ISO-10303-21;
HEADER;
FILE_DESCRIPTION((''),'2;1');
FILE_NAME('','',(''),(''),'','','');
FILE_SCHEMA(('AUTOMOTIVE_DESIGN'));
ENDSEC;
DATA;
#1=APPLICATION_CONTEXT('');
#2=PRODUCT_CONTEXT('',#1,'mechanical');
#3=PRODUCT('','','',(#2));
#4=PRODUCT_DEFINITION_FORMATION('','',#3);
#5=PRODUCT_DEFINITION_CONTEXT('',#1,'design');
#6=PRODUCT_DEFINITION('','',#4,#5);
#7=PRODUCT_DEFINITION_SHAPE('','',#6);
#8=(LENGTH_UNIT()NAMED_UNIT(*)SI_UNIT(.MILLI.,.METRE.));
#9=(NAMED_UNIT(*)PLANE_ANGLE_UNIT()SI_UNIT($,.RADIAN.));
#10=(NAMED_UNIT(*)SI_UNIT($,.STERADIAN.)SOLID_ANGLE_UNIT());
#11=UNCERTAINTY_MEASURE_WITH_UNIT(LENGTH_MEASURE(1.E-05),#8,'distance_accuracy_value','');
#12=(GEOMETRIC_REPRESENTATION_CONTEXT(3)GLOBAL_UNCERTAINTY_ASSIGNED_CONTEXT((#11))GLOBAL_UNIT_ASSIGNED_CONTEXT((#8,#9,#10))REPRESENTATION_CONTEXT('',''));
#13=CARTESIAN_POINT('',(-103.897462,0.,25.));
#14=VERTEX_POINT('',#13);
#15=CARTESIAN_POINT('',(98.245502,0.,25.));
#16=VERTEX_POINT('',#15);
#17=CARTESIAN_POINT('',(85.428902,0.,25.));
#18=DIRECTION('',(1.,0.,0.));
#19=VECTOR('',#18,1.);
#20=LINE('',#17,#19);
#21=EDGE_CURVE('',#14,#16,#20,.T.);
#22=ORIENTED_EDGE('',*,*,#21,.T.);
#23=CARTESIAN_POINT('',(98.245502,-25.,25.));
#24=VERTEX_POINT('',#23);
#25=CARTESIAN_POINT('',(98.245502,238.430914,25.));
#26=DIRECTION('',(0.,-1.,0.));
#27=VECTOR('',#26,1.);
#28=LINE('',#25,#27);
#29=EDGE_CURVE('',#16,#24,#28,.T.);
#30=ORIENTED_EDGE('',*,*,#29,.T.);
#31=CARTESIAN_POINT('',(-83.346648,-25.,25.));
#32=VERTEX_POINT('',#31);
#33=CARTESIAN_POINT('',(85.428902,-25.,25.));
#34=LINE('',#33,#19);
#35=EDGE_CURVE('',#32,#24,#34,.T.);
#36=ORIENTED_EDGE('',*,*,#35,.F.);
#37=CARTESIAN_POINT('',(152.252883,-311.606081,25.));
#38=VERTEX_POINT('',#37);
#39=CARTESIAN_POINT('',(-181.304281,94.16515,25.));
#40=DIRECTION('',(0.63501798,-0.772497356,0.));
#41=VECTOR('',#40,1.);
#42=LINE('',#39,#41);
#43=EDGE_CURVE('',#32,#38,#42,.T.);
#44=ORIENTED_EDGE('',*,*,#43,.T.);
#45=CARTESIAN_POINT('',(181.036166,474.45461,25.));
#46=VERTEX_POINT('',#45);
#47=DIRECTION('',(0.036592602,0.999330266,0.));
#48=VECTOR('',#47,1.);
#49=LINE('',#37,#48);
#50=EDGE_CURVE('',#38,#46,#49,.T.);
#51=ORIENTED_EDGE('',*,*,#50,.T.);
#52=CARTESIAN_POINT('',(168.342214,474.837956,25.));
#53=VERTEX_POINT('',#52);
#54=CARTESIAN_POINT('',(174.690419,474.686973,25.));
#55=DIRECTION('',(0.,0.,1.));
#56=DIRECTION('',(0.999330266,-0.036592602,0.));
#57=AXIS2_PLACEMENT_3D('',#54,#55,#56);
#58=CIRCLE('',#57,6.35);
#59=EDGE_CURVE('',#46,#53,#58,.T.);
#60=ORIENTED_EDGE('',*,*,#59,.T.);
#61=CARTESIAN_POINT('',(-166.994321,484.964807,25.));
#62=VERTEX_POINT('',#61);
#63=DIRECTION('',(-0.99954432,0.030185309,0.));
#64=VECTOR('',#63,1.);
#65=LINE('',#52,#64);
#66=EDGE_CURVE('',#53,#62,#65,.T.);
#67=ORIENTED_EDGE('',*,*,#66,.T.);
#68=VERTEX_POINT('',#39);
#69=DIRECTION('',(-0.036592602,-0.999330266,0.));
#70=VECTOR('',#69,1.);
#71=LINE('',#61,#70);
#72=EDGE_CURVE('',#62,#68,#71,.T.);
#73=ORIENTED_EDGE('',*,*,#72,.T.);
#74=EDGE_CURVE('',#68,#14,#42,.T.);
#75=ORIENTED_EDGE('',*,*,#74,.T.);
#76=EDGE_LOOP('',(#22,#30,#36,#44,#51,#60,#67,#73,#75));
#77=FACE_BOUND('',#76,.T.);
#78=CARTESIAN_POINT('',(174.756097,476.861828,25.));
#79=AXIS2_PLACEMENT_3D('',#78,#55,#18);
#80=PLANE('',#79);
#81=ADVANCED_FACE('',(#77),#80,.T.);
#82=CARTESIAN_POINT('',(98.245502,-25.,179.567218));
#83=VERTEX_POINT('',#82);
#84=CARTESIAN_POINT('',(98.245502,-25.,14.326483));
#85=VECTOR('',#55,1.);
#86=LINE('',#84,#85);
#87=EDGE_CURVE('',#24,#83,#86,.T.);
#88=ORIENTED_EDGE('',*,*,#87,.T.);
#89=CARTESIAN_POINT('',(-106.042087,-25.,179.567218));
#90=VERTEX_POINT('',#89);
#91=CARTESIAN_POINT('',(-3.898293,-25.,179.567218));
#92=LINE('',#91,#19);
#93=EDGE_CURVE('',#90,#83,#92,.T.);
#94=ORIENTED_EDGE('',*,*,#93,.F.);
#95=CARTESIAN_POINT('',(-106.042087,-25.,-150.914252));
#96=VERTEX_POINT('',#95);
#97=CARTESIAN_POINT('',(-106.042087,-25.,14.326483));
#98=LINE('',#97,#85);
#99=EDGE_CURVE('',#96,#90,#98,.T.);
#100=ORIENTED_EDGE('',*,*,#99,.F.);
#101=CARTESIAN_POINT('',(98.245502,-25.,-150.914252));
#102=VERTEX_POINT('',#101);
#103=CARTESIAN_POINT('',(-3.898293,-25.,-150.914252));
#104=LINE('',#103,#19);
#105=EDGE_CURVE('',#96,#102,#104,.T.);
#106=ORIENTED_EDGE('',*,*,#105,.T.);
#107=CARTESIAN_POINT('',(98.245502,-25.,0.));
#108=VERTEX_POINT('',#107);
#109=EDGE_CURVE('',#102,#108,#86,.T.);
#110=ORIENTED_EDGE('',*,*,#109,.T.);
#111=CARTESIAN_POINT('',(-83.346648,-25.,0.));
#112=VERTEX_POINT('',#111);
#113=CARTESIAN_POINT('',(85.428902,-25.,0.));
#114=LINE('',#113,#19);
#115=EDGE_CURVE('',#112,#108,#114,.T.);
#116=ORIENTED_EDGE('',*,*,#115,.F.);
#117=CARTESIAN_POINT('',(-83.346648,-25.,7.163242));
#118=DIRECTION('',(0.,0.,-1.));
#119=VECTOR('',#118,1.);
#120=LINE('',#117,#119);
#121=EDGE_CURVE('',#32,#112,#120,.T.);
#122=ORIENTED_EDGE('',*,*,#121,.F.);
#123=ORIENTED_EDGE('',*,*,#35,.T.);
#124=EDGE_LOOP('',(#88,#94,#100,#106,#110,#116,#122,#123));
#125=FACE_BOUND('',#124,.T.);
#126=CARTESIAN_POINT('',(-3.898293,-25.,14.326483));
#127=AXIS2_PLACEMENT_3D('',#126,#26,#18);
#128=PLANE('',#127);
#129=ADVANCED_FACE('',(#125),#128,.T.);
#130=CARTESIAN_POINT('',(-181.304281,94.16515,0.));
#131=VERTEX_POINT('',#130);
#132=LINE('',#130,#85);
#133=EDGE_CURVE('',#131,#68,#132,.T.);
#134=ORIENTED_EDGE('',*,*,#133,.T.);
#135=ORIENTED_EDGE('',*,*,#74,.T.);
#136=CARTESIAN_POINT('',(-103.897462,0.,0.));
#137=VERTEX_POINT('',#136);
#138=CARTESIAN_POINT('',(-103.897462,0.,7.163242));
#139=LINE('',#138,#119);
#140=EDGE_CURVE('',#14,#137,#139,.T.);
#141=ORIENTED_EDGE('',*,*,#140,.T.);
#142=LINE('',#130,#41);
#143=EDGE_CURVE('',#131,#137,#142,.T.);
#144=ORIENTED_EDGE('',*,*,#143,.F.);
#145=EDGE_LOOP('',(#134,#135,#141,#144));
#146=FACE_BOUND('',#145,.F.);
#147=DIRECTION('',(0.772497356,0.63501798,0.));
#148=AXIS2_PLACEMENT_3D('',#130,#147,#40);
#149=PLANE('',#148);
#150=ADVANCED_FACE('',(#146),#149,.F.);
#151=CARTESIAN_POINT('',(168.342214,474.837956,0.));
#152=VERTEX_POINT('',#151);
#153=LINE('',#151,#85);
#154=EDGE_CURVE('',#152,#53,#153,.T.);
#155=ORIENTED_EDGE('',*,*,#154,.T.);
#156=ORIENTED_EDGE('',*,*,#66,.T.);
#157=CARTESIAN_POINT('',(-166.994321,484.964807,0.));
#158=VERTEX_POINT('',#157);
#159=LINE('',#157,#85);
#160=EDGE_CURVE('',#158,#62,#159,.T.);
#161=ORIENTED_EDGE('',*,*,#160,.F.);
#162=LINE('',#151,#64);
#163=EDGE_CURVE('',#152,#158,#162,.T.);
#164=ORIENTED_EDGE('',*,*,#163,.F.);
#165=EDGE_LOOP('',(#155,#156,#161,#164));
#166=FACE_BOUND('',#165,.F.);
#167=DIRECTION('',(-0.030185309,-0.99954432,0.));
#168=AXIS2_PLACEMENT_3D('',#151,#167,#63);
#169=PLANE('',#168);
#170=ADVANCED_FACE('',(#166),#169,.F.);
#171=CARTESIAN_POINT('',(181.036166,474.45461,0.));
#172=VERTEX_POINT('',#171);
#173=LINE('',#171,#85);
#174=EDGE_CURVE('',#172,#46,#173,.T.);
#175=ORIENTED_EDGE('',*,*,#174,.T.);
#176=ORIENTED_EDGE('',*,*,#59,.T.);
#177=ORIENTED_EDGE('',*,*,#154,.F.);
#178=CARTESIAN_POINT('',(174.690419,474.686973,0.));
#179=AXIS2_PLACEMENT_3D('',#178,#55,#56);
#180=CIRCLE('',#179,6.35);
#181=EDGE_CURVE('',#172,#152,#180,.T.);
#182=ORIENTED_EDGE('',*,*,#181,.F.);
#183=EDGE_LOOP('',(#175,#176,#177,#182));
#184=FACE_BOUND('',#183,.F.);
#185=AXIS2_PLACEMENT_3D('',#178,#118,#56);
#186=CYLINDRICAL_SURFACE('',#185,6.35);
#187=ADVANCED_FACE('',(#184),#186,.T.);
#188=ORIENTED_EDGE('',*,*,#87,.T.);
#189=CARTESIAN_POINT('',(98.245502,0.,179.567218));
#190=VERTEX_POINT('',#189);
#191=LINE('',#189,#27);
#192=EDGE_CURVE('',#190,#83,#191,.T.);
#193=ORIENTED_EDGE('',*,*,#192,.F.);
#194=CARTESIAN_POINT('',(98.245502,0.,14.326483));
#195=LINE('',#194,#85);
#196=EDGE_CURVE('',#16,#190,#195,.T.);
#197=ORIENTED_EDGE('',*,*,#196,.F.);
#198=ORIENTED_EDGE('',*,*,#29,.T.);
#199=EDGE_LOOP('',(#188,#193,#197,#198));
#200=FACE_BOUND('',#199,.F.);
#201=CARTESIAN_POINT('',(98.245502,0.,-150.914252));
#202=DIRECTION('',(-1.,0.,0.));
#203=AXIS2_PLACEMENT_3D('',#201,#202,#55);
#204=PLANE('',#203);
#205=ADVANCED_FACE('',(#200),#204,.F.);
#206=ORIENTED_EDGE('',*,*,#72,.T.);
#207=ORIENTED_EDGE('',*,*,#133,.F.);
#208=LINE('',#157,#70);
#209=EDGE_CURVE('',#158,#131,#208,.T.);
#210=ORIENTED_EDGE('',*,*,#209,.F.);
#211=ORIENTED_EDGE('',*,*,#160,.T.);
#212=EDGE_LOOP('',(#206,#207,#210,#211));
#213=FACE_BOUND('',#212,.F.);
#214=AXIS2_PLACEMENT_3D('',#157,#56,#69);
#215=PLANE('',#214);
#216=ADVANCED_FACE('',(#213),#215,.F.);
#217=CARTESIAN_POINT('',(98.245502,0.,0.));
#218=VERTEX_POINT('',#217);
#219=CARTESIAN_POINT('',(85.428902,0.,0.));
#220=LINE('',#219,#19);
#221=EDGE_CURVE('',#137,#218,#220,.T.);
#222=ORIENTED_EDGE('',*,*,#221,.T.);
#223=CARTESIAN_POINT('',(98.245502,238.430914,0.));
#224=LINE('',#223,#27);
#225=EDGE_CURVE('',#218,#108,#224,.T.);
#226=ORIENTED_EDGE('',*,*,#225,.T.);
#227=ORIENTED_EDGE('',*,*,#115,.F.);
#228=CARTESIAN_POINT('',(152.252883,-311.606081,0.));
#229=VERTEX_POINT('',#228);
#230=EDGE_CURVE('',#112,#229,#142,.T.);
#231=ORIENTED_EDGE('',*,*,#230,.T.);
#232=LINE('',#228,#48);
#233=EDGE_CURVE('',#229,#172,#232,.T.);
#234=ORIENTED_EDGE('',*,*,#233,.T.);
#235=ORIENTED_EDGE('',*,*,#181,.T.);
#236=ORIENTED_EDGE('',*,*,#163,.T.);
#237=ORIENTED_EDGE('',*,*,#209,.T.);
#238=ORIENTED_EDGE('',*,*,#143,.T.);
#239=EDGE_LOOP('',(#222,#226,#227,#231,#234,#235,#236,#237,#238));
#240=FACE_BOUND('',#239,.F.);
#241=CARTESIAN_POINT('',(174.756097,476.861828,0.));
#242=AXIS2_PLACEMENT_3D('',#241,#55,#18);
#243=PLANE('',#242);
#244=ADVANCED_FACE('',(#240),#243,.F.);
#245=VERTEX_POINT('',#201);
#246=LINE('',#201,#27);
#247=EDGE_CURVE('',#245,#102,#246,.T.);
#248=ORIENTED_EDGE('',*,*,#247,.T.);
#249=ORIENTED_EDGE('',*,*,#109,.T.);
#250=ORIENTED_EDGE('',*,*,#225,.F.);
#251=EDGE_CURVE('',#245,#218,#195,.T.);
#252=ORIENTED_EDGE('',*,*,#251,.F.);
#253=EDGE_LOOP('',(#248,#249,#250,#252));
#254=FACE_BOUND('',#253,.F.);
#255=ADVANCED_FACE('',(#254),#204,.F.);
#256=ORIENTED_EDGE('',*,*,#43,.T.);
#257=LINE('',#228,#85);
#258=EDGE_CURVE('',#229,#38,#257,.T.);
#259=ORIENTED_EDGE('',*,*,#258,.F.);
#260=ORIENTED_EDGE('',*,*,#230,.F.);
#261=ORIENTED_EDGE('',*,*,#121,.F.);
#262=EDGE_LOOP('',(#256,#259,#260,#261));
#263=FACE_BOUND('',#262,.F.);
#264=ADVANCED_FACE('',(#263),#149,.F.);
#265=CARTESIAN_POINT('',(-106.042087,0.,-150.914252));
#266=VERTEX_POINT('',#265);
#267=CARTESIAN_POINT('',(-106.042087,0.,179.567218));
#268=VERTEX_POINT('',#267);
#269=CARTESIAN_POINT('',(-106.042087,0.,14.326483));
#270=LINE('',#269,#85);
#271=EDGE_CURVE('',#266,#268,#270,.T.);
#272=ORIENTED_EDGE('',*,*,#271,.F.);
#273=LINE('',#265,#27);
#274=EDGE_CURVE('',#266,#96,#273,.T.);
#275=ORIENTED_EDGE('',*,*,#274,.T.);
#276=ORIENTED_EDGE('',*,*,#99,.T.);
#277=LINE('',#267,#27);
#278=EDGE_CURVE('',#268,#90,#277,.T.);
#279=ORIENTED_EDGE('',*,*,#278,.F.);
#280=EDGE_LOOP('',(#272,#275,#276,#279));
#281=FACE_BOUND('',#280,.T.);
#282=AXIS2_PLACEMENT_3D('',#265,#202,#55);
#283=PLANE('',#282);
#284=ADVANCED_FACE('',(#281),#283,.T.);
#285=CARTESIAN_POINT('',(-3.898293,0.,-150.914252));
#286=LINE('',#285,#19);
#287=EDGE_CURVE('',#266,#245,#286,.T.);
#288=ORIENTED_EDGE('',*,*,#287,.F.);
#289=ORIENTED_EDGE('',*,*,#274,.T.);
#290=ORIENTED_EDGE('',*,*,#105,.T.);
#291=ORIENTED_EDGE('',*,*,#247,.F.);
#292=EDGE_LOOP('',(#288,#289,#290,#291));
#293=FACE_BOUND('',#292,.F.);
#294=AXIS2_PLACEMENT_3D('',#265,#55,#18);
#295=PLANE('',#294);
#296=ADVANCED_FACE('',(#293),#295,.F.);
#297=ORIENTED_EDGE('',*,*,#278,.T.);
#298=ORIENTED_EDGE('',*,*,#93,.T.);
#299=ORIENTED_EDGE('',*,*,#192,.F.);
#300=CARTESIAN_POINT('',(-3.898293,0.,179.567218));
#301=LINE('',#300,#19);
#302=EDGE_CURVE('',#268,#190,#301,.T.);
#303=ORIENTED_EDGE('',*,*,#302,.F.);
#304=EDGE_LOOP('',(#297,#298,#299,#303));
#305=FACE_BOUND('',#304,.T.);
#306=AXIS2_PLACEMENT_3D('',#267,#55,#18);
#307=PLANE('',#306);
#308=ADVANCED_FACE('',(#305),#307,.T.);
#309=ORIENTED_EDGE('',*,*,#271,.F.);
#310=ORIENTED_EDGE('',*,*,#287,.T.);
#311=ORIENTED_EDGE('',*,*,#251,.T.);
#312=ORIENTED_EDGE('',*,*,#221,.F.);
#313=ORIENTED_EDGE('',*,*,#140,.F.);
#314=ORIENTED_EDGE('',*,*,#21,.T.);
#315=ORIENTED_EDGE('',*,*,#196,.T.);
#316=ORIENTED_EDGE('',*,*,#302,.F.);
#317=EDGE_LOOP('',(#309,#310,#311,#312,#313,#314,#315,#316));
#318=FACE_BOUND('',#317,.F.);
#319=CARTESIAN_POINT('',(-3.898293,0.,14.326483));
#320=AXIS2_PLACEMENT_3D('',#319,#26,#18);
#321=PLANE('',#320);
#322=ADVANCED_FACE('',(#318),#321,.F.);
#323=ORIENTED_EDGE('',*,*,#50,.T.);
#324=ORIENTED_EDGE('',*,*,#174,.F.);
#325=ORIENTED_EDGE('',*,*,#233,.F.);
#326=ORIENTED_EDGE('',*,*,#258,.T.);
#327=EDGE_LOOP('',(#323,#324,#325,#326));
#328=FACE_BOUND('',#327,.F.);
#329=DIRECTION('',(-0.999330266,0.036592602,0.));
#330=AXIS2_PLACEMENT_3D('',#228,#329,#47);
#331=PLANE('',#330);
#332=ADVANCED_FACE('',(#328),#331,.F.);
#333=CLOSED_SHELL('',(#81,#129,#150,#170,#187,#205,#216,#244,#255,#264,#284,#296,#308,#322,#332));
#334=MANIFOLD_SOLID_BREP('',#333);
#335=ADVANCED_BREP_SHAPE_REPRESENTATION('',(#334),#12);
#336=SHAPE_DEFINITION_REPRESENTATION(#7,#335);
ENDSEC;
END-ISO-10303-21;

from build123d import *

# Parameters (mm, degrees)
F2_DEPTH = 25
F3_W     = 204.2875885963
F3_H     = 330.4814696312
F4_DEPTH = 25


with BuildPart() as f2:
    # F1 (on Top) → F2 (new body)
    with BuildSketch(Plane.XY):
        with BuildLine():
            Line((168.3422140292, 474.8379558081), (181.0361660289, 474.454610266))
            ThreePointArc((181.0361660289, 474.454610266), (174.8820955467, 481.0340797179), (168.3422140292, 474.8379558081))
        make_face()
        with BuildLine():
            Line((166.6445245232, 81.42426457), (181.0361660289, 474.454610266))
            Line((181.0361660289, 474.454610266), (168.3422140292, 474.8379558081))
            Line((168.3422140292, 474.8379558081), (-166.9943213011, 484.9648072356))
            Line((-166.9943213011, 484.9648072356), (-178.021518384, 183.8161801091))
            add(Edge.make_bspline(
                [(-178.021518384, 183.8161801091), (-126.121723234, 189.1373544028), (-5.2720297028, 157.9893070947), (124.2923755779, 80.293310388), (162.9702843725, 49.4019598786)],
                knots=[504.1665264406, 504.1665264406, 504.1665264406, 504.1665264406, 653.3978700476, 795.436226982, 795.436226982, 795.436226982, 795.436226982], degree=3))
            add(Edge.make_bspline(
                [(162.9702843725, 49.4019598786), (163.7914086642, 48.7461426667), (164.6014886785, 48.0934791624), (165.4002701181, 47.4441422338)],
                knots=[795.436226982, 795.436226982, 795.436226982, 795.436226982, 798.4516729787, 798.4516729787, 798.4516729787, 798.4516729787], degree=3))
            Line((165.4002701181, 47.4441422338), (166.6445245232, 81.42426457))
        make_face()
        with BuildLine():
            Line((163.474066231, -5.1597653413), (165.4002701181, 47.4441422338))
            add(Edge.make_bspline(
                [(162.9702843725, 49.4019598786), (163.7914086642, 48.7461426667), (164.6014886785, 48.0934791624), (165.4002701181, 47.4441422338)],
                knots=[795.436226982, 795.436226982, 795.436226982, 795.436226982, 798.4516729787, 798.4516729787, 798.4516729787, 798.4516729787], degree=3))
            Line((162.9702843725, 49.4019598786), (160.9759493271, -5.0625841432))
            add(Edge.make_bspline(
                [(163.474066231, -5.1597653413), (162.6521846932, -5.131062894), (161.8193790258, -5.0986033684), (160.9759493271, -5.0625841432)],
                knots=[958.9382746439, 958.9382746439, 958.9382746439, 958.9382746439, 961.7589781967, 961.7589781967, 961.7589781967, 961.7589781967], degree=3))
        make_face()
        with BuildLine():
            Line((160.9759493271, -5.0625841432), (162.9702843725, 49.4019598786))
            add(Edge.make_bspline(
                [(-178.021518384, 183.8161801091), (-126.121723234, 189.1373544028), (-5.2720297028, 157.9893070947), (124.2923755779, 80.293310388), (162.9702843725, 49.4019598786)],
                knots=[504.1665264406, 504.1665264406, 504.1665264406, 504.1665264406, 653.3978700476, 795.436226982, 795.436226982, 795.436226982, 795.436226982], degree=3))
            Line((-178.021518384, 183.8161801091), (-181.3042814193, 94.1651496755))
            Line((-181.3042814193, 94.1651496755), (-88.1747823589, -19.1265900522))
            add(Edge.make_bspline(
                [(160.9759493271, -5.0625841432), (121.4037743321, -3.3726281412), (19.2880670567, 12.0779258477), (-62.8138782039, -5.4855367148), (-88.1747823589, -19.1265900522)],
                knots=[961.7589781967, 961.7589781967, 961.7589781967, 961.7589781967, 1094.1012170077, 1176.4100957539, 1176.4100957539, 1176.4100957539, 1176.4100957539], degree=3))
        make_face()
        with BuildLine():
            Line((159.4487037703, -115.0909082779), (163.474066231, -5.1597653413))
            add(Edge.make_bspline(
                [(163.474066231, -5.1597653413), (162.6521846932, -5.131062894), (161.8193790258, -5.0986033684), (160.9759493271, -5.0625841432)],
                knots=[958.9382746439, 958.9382746439, 958.9382746439, 958.9382746439, 961.7589781967, 961.7589781967, 961.7589781967, 961.7589781967], degree=3))
            add(Edge.make_bspline(
                [(160.9759493271, -5.0625841432), (121.4037743321, -3.3726281412), (19.2880670567, 12.0779258477), (-62.8138782039, -5.4855367148), (-88.1747823589, -19.1265900522)],
                knots=[961.7589781967, 961.7589781967, 961.7589781967, 961.7589781967, 1094.1012170077, 1176.4100957539, 1176.4100957539, 1176.4100957539, 1176.4100957539], degree=3))
            Line((-88.1747823589, -19.1265900522), (152.2528830175, -311.6060811259))
            Line((152.2528830175, -311.6060811259), (155.8507933939, -213.3484947019))
            Line((155.8507933939, -213.3484947019), (159.4487037703, -115.0909082779))
        make_face()
    extrude(amount=F2_DEPTH)

    # F3 (on face) → F4 (join)
    with BuildSketch(Plane.XZ):
        with Locations((-3.8982927799, 14.3264830112)):
            Rectangle(F3_W, F3_H)
    extrude(amount=F4_DEPTH)


solid = f2.part
